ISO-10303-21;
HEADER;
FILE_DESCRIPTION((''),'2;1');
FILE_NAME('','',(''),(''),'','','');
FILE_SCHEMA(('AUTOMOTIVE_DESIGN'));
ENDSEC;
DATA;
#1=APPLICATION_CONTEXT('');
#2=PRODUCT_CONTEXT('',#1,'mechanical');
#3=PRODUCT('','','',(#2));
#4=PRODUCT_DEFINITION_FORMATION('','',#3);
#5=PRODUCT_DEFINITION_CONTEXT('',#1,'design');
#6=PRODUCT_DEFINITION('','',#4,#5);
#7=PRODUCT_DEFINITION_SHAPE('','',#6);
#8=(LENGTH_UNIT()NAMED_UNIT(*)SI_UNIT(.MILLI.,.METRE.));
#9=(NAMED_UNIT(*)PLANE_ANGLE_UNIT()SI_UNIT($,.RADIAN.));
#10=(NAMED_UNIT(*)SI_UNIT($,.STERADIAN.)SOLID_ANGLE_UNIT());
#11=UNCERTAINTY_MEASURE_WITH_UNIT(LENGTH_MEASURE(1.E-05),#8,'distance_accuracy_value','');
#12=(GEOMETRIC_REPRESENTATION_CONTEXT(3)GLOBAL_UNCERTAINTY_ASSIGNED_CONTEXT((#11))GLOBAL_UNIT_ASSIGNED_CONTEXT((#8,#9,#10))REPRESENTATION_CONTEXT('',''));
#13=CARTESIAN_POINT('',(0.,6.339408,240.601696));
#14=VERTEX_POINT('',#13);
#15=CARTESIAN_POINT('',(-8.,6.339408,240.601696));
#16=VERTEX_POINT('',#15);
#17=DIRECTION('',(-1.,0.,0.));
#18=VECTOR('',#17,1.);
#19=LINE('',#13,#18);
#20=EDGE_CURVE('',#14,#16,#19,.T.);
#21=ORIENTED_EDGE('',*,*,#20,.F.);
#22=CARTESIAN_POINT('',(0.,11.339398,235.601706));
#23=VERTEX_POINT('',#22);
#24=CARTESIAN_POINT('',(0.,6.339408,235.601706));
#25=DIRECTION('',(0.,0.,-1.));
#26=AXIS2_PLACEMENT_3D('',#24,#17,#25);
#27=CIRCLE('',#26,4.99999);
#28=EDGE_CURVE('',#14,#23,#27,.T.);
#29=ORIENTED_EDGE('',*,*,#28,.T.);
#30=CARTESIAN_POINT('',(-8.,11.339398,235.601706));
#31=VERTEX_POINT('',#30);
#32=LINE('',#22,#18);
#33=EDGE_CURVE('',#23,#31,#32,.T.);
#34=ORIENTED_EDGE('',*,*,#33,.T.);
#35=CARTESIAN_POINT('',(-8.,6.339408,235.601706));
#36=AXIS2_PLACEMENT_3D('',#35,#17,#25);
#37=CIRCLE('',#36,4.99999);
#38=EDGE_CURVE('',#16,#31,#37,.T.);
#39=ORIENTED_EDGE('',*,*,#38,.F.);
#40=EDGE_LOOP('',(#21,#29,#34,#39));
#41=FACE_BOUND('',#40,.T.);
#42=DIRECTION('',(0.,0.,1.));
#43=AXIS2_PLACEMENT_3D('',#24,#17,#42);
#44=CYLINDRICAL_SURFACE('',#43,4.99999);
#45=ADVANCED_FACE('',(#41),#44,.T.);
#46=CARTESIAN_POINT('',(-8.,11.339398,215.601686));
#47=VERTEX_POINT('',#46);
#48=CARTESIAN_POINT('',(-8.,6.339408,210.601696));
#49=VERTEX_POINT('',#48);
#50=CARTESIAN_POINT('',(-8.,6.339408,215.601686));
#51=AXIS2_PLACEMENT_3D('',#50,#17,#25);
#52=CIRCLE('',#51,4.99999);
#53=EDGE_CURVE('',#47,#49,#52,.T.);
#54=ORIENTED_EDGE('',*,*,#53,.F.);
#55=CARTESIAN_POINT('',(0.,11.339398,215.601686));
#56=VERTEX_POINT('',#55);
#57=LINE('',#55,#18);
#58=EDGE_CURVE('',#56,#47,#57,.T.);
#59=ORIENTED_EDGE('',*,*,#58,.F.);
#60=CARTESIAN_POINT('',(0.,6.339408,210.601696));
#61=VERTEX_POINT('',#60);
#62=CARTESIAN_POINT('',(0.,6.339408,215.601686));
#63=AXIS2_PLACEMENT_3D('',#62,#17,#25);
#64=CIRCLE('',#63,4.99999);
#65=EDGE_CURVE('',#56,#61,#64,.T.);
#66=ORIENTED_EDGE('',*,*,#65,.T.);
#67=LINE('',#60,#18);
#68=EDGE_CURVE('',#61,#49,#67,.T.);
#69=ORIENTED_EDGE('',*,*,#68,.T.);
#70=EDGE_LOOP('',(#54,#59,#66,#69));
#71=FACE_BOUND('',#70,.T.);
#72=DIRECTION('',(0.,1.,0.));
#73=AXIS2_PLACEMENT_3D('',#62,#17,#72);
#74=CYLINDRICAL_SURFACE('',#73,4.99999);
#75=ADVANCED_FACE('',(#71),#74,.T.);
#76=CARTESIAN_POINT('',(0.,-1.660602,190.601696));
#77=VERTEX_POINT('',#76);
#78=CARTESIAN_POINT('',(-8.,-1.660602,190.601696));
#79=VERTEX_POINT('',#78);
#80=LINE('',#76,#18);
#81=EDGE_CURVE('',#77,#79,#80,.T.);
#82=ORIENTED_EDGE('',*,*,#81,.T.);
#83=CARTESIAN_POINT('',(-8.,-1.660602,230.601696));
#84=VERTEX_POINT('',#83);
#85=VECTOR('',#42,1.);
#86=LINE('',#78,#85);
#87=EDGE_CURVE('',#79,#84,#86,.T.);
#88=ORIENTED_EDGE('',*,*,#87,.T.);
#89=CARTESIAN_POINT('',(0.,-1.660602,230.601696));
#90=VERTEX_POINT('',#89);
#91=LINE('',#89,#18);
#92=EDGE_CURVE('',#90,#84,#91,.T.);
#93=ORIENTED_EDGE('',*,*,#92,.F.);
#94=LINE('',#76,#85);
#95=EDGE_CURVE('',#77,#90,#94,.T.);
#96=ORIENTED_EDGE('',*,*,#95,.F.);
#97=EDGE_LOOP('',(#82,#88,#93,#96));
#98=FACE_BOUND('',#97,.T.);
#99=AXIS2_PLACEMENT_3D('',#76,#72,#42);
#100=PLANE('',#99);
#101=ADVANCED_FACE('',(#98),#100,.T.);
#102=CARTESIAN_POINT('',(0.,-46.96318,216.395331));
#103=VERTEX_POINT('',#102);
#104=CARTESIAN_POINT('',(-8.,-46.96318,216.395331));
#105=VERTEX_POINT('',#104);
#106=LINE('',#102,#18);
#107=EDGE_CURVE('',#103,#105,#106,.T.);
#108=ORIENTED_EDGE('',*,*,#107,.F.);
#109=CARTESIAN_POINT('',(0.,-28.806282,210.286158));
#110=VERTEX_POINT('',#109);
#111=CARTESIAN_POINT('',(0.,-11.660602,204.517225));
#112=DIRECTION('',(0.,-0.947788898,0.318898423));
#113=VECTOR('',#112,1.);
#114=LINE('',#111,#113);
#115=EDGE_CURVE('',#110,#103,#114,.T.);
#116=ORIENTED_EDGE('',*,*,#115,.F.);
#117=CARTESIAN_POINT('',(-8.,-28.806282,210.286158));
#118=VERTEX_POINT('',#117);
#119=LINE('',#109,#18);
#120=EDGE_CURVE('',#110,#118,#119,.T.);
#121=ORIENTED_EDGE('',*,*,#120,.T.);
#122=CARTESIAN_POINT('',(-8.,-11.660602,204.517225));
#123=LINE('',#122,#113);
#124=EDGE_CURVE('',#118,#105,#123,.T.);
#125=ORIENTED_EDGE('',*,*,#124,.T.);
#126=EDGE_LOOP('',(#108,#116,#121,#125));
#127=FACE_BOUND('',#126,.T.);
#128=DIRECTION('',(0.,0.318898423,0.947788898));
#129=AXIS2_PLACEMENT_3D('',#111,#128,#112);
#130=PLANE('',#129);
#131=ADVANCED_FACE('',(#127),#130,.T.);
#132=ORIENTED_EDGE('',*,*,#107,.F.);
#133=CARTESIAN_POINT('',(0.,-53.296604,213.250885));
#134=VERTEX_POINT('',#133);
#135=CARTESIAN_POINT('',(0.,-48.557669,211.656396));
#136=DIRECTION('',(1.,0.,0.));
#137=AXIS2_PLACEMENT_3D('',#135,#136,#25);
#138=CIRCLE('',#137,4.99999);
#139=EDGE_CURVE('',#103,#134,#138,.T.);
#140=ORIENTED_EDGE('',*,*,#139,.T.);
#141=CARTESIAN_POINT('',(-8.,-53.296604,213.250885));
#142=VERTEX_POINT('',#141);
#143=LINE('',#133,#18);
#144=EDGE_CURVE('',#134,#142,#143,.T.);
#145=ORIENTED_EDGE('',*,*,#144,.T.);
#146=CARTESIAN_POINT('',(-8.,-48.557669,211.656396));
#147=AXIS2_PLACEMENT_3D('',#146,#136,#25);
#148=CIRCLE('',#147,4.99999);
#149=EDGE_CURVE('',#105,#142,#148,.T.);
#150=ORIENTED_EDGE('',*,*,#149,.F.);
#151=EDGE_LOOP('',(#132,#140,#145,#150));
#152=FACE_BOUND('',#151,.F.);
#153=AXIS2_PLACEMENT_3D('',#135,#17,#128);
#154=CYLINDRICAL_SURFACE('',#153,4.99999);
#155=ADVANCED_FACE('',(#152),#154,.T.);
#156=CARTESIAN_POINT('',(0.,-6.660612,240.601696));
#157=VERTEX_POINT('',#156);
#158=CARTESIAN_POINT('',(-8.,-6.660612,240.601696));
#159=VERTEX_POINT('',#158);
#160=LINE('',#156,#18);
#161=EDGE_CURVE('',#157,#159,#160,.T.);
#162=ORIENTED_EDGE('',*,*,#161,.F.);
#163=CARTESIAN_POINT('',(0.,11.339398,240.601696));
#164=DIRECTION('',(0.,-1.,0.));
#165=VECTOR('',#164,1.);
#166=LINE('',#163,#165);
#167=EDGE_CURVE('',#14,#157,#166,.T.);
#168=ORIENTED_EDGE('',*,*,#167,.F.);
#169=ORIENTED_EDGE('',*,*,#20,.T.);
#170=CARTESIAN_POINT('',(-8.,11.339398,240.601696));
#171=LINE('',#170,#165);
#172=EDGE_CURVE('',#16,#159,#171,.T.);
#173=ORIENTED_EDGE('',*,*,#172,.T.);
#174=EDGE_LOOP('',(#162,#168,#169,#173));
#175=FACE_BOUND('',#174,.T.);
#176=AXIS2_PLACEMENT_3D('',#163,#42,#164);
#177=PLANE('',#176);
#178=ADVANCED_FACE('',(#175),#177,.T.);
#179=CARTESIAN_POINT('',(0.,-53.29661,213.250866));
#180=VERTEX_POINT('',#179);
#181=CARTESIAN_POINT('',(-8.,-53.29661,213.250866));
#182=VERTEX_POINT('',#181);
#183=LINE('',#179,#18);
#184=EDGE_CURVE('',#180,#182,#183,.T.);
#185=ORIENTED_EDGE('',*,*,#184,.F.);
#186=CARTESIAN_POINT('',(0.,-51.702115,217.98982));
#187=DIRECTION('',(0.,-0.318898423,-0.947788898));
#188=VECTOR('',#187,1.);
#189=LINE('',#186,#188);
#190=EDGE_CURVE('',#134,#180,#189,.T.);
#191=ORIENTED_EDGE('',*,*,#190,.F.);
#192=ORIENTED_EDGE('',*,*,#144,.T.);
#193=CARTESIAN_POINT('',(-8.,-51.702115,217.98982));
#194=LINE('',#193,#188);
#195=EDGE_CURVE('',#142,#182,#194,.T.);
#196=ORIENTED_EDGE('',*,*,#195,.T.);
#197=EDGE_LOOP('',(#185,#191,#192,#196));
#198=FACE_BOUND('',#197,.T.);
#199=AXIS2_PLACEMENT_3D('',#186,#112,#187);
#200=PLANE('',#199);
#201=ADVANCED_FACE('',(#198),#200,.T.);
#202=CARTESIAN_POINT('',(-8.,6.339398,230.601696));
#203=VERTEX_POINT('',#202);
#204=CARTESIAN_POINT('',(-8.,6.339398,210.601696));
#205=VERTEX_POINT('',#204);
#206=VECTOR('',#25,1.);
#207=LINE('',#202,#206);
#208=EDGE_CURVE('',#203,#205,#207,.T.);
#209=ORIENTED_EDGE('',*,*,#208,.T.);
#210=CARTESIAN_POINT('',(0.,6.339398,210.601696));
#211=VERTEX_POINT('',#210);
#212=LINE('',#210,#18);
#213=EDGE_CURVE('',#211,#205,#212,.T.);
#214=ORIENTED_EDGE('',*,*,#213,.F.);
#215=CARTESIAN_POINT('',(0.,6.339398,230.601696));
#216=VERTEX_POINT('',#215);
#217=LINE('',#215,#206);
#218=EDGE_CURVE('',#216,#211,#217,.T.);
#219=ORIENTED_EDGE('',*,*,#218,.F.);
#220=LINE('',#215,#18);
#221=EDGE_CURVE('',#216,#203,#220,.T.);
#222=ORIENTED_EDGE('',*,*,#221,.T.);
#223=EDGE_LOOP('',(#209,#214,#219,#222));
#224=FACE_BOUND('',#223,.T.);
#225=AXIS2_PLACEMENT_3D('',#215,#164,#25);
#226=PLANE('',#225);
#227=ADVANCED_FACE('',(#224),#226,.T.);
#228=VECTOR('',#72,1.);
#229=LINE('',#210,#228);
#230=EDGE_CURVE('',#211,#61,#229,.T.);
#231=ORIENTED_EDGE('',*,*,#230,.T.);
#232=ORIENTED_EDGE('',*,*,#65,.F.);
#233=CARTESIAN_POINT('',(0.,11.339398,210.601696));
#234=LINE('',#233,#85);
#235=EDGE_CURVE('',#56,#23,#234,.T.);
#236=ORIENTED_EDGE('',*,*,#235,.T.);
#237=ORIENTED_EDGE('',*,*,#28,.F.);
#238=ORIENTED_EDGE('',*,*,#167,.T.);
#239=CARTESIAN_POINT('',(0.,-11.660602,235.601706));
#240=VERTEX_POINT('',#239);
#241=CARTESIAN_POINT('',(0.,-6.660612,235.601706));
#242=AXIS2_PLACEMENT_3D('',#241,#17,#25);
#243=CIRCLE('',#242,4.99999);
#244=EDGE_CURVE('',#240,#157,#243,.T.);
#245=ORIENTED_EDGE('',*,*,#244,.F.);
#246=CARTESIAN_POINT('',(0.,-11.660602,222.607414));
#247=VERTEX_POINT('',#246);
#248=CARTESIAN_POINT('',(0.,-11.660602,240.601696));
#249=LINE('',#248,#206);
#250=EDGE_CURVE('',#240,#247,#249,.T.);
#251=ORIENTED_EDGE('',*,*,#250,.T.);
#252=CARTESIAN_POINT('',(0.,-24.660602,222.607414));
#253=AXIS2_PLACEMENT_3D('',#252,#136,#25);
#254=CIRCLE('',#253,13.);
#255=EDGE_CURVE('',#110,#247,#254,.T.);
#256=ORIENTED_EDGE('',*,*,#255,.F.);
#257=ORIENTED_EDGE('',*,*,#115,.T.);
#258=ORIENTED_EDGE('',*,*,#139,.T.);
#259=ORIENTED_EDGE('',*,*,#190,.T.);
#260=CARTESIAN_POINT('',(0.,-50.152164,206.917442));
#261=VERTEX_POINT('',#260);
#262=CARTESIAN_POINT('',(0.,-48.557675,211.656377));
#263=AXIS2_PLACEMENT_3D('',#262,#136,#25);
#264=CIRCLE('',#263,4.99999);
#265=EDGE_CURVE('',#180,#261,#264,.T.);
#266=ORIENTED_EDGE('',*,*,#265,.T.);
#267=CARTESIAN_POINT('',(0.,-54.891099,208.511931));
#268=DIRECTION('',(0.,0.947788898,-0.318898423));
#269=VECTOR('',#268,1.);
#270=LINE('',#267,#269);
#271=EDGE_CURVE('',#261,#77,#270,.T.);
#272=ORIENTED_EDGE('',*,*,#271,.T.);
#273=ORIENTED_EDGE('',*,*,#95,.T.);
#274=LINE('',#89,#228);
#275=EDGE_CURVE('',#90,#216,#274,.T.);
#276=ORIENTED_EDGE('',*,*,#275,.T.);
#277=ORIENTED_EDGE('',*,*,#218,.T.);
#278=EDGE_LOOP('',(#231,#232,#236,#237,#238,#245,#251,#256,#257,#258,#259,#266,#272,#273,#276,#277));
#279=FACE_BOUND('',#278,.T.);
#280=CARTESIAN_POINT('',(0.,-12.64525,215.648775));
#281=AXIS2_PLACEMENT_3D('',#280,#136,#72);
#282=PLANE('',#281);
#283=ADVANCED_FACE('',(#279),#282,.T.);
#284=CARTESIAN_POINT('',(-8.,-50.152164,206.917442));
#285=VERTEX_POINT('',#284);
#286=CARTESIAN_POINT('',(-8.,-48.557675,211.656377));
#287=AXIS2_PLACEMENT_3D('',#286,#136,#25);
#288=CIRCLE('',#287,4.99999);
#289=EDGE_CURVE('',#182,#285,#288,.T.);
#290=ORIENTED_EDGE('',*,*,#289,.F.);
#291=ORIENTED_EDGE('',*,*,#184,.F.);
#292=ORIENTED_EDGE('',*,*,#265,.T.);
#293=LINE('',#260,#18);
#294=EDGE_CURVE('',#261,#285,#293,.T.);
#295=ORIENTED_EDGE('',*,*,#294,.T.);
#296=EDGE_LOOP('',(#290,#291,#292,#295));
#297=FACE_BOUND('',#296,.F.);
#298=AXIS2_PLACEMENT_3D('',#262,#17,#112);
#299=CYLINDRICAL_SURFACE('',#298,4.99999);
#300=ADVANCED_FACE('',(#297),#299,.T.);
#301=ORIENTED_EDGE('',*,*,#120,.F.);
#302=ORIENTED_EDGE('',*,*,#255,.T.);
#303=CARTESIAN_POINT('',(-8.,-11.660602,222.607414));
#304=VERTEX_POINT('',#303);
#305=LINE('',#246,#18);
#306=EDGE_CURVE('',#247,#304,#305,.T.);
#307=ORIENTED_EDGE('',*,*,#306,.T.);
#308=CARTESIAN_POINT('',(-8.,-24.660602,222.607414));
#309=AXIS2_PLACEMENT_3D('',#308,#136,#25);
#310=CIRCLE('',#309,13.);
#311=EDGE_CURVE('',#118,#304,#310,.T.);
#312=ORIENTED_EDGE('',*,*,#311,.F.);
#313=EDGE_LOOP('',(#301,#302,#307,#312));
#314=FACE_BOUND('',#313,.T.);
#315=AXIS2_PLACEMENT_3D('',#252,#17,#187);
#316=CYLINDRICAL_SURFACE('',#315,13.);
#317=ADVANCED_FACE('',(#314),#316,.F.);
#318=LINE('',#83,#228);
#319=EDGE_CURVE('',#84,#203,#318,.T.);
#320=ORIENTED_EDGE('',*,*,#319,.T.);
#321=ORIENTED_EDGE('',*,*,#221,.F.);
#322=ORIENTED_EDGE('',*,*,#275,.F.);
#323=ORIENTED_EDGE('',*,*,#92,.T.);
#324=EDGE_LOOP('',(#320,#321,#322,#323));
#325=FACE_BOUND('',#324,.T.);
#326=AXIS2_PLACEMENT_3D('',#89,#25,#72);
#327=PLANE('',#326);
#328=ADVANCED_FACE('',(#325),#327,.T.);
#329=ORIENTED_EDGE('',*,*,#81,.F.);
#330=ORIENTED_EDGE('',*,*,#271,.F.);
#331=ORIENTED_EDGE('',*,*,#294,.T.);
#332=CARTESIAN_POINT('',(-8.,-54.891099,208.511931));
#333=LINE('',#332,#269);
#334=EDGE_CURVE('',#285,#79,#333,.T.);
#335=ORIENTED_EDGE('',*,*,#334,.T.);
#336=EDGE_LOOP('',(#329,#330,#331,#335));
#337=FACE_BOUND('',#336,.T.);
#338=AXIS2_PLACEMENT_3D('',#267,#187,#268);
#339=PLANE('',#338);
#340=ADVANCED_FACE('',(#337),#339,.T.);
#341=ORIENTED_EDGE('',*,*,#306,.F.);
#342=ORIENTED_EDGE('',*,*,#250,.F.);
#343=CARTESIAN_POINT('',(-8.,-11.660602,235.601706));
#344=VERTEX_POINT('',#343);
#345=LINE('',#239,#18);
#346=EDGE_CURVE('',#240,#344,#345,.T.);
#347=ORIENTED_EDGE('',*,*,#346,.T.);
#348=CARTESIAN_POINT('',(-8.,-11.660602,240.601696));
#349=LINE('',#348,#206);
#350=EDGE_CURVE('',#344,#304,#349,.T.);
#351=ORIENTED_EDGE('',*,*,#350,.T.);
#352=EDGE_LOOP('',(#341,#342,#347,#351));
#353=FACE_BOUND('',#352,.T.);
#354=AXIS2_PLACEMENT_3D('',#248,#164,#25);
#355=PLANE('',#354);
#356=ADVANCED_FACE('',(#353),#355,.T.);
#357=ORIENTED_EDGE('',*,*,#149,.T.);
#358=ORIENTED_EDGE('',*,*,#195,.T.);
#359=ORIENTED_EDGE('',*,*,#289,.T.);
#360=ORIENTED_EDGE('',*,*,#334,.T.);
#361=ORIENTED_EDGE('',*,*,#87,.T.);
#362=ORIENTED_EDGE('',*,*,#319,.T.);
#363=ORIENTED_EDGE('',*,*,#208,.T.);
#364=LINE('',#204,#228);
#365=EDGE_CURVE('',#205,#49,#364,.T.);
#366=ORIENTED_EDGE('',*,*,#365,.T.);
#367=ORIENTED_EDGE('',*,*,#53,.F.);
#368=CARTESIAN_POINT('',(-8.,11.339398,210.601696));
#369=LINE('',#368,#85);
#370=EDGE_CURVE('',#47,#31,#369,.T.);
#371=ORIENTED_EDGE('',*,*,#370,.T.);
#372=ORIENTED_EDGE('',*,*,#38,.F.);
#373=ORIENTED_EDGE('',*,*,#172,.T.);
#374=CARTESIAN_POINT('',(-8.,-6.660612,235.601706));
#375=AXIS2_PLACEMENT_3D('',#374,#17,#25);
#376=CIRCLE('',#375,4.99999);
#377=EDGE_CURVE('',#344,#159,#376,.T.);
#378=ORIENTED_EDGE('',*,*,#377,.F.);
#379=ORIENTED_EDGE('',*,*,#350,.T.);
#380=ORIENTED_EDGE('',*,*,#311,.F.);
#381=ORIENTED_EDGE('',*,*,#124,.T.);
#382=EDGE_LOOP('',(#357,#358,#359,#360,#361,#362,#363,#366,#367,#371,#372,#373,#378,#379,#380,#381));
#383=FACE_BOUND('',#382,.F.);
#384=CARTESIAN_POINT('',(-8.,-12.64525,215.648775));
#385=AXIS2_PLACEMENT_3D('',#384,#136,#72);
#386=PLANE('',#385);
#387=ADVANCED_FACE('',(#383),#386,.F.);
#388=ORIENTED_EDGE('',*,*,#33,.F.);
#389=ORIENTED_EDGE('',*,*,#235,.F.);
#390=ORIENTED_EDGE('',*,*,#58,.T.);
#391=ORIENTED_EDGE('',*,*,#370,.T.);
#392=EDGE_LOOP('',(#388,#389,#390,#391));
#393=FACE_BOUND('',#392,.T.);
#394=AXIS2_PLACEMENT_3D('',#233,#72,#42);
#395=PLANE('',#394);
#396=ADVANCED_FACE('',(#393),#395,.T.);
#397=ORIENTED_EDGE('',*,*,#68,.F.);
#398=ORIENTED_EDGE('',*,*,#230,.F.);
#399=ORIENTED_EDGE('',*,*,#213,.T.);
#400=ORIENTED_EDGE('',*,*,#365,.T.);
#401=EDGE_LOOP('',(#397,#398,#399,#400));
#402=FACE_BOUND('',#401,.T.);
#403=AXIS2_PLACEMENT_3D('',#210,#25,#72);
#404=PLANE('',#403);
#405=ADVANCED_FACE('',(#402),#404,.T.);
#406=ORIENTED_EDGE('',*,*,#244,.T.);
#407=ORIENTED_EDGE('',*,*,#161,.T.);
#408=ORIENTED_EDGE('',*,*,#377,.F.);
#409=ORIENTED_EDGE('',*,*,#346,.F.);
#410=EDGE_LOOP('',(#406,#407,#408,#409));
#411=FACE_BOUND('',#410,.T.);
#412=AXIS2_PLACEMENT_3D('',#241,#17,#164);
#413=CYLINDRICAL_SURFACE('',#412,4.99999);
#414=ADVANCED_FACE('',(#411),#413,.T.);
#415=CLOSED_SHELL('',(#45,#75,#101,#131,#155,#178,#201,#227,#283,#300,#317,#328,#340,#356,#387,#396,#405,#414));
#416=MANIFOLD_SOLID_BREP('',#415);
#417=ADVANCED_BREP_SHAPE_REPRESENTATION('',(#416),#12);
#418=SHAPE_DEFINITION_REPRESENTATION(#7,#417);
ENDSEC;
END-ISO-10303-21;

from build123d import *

# Parameters (mm, degrees)
F1_DEPTH = 8
F2_R     = 4.99999
F3_R     = 13
F4_R     = 4.99999


# Not quite as in the source:
# - a fillet or chamfer is up to 0.001 mm smaller than in the source, because OpenCascade refuses the exact size


with BuildPart() as f1:
    # F0 (on Right) → F1 (new body)
    with BuildSketch(Plane.YZ):
        Polygon((11.3393977799, 240.6016960415), (-11.6606022201, 240.6016960415), (-11.6606022201, 204.5172253872), (-51.7021150763, 217.9898196767), (-54.8910993051, 208.5119306929), (-1.6606022201, 190.6016960415), (-1.6606022201, 230.6016960415), (6.3393977799, 230.6016960415), (6.3393977799, 210.6016960415), (11.3393977799, 210.6016960415), align=None)
    extrude(amount=-F1_DEPTH)

    # F2 (radius 5 in the source; OpenCascade refuses exactly that, so slightly less here)
    f2_edges = [f1.edges().sort_by_distance(p)[0] for p in [
        (-4, -51.702115, 217.98982),
        (-4, -54.891099, 208.511931),
    ]]
    fillet(f2_edges, radius=F2_R)

    # F3
    f3_edges = [f1.edges().sort_by_distance(p)[0] for p in [
        (-4, -11.660602, 204.517225),
    ]]
    fillet(f3_edges, radius=F3_R)

    # F4 (radius 5 in the source; OpenCascade refuses exactly that, so slightly less here)
    f4_edges = [f1.edges().sort_by_distance(p)[0] for p in [
        (-4, -11.660602, 240.601696),
        (-4, 11.339398, 240.601696),
        (-4, 11.339398, 210.601696),
    ]]
    fillet(f4_edges, radius=F4_R)


solid = f1.part
